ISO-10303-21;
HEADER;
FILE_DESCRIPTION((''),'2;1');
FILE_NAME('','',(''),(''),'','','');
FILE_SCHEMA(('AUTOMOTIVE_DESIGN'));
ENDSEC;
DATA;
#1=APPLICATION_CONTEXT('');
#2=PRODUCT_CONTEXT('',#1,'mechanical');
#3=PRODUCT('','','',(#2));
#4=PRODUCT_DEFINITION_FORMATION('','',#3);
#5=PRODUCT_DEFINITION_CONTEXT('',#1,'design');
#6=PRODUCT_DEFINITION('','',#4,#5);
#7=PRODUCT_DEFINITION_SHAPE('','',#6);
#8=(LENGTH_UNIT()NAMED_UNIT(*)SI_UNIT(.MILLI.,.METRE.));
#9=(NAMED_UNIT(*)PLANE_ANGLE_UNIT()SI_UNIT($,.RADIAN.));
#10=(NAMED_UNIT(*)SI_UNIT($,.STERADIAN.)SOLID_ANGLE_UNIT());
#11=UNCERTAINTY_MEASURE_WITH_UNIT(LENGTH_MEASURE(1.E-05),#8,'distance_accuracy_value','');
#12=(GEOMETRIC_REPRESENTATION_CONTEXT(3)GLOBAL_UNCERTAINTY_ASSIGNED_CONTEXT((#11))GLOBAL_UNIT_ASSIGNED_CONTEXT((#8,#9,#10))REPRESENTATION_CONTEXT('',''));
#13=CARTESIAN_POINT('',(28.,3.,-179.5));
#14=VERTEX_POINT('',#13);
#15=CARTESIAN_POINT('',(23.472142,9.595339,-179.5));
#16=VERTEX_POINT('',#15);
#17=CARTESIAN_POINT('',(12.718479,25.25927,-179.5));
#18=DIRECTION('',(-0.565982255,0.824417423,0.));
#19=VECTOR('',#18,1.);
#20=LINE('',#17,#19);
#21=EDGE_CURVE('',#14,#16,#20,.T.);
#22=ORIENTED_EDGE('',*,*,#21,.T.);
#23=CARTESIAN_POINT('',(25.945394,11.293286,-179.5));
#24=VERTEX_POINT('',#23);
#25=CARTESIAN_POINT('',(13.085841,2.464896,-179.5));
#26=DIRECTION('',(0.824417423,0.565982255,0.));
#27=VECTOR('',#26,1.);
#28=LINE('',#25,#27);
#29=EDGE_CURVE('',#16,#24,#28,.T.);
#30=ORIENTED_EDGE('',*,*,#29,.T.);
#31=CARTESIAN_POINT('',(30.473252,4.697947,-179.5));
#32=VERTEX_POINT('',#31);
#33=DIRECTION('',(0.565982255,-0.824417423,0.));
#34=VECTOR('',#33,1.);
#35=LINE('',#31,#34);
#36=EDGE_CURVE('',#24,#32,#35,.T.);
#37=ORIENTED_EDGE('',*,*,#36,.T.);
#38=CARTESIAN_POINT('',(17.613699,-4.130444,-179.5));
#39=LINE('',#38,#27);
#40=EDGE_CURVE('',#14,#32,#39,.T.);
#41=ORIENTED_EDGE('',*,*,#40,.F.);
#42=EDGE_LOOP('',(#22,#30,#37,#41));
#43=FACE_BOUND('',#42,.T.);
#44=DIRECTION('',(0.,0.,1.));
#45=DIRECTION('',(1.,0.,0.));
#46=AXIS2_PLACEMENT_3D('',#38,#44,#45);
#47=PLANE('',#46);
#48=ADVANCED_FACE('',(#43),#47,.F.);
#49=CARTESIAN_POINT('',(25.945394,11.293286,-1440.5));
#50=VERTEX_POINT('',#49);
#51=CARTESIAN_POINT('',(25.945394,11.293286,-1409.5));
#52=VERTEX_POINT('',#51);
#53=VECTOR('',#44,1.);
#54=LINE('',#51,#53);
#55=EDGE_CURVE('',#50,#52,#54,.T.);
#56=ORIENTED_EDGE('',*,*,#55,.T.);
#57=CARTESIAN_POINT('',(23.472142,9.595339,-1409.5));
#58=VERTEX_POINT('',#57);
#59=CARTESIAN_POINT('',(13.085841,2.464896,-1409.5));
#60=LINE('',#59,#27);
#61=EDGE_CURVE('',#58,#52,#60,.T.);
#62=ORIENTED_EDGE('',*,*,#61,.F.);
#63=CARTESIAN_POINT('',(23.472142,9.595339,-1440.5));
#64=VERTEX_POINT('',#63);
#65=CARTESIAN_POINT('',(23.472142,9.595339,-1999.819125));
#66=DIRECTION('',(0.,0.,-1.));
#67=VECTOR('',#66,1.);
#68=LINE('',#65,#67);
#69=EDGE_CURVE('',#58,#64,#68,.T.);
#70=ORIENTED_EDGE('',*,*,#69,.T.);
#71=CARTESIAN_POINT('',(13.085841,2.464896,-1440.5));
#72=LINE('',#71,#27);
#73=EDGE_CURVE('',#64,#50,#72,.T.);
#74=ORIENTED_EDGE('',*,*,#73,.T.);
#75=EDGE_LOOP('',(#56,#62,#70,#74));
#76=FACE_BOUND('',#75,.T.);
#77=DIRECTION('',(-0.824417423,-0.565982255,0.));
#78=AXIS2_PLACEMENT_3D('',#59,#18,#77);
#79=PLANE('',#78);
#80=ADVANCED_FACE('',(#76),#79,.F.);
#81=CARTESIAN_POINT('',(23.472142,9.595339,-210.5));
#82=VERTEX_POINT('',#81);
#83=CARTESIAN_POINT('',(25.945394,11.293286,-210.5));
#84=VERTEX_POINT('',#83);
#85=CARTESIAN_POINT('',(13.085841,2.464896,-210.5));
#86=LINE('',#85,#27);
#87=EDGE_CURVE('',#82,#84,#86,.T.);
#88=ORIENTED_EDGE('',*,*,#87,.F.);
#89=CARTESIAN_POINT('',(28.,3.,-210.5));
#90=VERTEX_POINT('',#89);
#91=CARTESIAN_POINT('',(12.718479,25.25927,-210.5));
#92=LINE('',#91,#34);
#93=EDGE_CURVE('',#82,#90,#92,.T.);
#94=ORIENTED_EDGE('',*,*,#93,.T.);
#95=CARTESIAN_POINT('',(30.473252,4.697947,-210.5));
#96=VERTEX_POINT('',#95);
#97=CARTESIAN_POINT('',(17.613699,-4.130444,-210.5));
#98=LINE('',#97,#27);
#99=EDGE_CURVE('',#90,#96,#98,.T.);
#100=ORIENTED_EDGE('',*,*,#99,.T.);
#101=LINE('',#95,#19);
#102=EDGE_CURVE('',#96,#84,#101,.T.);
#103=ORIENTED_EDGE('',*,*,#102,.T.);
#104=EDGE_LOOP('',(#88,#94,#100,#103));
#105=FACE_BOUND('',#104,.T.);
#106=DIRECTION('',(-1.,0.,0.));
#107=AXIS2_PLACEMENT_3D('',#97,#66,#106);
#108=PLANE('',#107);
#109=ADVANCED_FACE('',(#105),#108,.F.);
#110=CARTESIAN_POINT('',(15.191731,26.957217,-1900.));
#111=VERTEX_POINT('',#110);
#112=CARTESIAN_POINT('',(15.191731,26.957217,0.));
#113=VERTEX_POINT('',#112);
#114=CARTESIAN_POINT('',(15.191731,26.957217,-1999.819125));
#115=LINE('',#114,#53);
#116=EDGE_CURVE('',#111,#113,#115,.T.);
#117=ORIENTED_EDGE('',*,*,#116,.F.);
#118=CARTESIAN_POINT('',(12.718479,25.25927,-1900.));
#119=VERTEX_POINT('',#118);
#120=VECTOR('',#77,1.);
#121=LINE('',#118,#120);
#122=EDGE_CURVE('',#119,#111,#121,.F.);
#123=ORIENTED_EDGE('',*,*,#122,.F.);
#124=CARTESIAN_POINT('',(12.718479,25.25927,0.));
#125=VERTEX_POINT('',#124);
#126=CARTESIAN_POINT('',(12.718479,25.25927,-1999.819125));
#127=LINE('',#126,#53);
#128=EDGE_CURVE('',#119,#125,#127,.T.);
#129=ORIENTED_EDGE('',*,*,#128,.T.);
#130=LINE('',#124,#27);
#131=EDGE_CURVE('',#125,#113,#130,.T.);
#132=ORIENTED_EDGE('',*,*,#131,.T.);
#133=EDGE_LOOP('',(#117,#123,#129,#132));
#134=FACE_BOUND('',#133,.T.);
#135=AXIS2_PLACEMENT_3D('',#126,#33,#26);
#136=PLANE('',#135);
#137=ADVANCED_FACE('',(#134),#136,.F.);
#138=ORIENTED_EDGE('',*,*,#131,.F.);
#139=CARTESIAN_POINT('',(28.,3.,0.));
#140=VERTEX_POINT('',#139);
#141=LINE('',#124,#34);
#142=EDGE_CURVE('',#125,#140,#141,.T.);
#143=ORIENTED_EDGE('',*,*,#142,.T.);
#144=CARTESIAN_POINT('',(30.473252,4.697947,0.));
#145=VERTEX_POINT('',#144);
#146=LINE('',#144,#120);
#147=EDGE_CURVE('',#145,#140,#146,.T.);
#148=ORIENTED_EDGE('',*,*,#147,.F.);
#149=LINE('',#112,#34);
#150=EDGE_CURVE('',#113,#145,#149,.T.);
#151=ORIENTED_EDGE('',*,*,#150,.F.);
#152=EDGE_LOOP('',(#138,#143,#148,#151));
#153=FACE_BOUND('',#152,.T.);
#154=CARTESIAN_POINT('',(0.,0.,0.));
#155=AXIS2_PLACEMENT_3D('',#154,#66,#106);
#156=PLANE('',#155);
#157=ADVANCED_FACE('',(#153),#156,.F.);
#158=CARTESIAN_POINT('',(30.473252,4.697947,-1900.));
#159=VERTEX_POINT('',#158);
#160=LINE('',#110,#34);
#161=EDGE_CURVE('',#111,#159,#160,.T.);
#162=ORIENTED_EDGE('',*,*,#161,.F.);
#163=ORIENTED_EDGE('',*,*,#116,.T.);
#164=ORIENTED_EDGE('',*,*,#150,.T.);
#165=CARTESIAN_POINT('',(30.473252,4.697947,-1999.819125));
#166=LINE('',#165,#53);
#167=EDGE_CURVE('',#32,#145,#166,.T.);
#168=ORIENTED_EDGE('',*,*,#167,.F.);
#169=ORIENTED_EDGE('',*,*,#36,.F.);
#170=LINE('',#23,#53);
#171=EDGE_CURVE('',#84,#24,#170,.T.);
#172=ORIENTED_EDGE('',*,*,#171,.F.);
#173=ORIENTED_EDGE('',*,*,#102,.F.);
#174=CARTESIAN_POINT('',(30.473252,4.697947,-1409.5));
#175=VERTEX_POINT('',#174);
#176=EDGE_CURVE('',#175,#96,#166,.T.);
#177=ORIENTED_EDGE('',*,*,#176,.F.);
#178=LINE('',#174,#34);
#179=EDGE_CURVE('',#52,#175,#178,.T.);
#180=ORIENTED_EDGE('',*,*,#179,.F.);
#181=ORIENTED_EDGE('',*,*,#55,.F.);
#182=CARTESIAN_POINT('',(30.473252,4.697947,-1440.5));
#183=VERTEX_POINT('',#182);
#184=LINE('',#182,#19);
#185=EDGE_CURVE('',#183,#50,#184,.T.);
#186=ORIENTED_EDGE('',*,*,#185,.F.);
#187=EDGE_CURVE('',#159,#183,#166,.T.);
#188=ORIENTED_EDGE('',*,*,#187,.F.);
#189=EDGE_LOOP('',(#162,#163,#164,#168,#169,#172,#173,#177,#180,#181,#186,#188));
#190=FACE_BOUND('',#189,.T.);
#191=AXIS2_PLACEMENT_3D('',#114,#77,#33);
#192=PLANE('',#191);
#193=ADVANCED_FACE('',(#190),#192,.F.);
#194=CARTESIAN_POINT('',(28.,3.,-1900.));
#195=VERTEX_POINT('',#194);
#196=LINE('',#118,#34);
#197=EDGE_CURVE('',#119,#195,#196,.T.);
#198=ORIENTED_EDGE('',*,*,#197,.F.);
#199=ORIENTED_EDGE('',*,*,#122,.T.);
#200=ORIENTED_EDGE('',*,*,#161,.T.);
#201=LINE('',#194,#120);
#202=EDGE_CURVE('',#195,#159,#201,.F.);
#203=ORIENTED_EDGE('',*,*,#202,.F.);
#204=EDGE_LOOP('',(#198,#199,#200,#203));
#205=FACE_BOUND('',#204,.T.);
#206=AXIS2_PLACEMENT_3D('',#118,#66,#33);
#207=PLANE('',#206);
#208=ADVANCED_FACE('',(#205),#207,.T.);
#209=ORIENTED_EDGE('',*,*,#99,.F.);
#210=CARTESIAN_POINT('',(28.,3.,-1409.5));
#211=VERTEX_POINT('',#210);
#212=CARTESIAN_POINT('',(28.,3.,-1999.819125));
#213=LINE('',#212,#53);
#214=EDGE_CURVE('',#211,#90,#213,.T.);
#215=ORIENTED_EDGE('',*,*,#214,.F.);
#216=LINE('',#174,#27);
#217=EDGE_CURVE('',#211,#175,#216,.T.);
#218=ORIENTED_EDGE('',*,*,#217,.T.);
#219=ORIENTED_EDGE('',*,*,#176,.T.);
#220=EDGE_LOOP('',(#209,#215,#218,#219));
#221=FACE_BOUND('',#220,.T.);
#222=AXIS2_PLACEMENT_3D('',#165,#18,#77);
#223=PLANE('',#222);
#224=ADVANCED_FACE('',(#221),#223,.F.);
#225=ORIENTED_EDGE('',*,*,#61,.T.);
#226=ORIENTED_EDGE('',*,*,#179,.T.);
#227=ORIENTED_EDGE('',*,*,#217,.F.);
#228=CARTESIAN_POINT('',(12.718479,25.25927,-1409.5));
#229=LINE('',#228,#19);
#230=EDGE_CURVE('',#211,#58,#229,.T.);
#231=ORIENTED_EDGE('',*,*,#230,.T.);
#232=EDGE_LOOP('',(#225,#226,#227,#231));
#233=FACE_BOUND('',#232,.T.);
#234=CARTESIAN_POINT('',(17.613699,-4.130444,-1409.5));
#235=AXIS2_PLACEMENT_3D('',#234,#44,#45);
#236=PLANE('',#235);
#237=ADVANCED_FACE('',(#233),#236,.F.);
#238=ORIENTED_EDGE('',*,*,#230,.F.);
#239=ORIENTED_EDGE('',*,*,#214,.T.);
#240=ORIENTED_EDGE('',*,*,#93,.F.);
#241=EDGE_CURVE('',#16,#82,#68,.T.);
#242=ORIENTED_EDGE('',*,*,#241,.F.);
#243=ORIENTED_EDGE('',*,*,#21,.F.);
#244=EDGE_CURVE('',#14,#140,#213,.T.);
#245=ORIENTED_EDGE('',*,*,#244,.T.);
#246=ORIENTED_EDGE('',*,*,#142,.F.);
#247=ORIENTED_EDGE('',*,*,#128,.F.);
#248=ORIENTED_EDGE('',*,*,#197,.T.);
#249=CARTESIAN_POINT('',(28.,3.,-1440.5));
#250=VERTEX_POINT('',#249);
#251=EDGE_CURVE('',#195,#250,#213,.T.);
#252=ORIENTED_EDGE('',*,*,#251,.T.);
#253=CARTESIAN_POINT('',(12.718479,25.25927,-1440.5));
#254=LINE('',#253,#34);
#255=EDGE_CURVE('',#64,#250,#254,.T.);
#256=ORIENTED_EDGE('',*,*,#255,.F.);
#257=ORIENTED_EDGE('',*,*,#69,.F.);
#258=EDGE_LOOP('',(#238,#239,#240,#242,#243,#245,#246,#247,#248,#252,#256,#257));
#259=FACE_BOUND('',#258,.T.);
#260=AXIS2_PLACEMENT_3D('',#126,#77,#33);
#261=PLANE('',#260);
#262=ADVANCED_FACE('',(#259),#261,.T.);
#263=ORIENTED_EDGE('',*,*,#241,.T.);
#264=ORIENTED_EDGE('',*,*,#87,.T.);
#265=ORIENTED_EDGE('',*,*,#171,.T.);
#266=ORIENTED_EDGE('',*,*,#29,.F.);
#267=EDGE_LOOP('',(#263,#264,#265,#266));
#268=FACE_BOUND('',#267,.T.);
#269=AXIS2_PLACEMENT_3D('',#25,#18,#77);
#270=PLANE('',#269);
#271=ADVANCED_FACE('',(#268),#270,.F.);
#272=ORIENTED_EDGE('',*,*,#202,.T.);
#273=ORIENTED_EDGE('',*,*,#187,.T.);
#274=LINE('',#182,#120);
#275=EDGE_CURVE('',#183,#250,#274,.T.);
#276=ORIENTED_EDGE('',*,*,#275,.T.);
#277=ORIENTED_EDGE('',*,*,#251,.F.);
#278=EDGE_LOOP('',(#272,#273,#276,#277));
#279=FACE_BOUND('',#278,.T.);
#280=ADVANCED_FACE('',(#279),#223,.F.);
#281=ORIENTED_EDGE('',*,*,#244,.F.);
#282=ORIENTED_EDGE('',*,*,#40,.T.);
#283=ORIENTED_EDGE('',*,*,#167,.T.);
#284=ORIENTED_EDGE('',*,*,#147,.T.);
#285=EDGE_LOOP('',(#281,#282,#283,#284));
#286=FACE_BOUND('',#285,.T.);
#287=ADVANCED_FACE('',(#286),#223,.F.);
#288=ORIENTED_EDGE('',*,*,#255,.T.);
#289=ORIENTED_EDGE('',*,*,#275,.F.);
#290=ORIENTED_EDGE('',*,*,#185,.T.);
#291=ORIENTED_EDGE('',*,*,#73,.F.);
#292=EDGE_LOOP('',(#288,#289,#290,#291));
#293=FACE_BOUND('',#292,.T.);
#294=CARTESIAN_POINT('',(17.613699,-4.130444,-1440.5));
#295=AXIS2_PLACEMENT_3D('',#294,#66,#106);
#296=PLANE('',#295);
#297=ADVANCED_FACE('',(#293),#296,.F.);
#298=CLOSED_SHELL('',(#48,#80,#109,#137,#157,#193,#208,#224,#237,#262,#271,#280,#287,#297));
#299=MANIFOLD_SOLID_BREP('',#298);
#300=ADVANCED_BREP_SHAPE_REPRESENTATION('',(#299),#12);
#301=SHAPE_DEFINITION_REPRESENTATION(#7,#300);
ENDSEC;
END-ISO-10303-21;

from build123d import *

# Parameters (mm, degrees)
SM_BASE_FLANGE_1_DEPTH = 1900
SKETCH_6_W             = 31
SKETCH_6_H             = 8
CUT_EXTRUDE_1_DEPTH    = 1901.069902905


# Sheet-metal steps are written as plain solids
with BuildPart() as part:
    # Sketch 1 → Базовая кромка1 (new body)
    with BuildSketch(Plane.XY):
        Polygon((12.718479119, 25.259270418), (28, 3), (30.473252269, 4.697946765), (15.191731388, 26.957217183), align=None)
    extrude(amount=-SM_BASE_FLANGE_1_DEPTH)

    # Эскиз6 → Вырез-Вытянуть1 (cut, through all)
    with BuildSketch(Plane(origin=(22.903663606, 15.723912198, 0), x_dir=(0, 0, -1), z_dir=(0.824417422906102, 0.5659822548533315, 0))):
        with Locations((1425, -9.374250867)):
            Rectangle(SKETCH_6_W, SKETCH_6_H)
        with Locations((195, -9.374250867)):
            Rectangle(SKETCH_6_W, SKETCH_6_H)
    extrude(amount=-CUT_EXTRUDE_1_DEPTH, mode=Mode.SUBTRACT)


solid = part.part
